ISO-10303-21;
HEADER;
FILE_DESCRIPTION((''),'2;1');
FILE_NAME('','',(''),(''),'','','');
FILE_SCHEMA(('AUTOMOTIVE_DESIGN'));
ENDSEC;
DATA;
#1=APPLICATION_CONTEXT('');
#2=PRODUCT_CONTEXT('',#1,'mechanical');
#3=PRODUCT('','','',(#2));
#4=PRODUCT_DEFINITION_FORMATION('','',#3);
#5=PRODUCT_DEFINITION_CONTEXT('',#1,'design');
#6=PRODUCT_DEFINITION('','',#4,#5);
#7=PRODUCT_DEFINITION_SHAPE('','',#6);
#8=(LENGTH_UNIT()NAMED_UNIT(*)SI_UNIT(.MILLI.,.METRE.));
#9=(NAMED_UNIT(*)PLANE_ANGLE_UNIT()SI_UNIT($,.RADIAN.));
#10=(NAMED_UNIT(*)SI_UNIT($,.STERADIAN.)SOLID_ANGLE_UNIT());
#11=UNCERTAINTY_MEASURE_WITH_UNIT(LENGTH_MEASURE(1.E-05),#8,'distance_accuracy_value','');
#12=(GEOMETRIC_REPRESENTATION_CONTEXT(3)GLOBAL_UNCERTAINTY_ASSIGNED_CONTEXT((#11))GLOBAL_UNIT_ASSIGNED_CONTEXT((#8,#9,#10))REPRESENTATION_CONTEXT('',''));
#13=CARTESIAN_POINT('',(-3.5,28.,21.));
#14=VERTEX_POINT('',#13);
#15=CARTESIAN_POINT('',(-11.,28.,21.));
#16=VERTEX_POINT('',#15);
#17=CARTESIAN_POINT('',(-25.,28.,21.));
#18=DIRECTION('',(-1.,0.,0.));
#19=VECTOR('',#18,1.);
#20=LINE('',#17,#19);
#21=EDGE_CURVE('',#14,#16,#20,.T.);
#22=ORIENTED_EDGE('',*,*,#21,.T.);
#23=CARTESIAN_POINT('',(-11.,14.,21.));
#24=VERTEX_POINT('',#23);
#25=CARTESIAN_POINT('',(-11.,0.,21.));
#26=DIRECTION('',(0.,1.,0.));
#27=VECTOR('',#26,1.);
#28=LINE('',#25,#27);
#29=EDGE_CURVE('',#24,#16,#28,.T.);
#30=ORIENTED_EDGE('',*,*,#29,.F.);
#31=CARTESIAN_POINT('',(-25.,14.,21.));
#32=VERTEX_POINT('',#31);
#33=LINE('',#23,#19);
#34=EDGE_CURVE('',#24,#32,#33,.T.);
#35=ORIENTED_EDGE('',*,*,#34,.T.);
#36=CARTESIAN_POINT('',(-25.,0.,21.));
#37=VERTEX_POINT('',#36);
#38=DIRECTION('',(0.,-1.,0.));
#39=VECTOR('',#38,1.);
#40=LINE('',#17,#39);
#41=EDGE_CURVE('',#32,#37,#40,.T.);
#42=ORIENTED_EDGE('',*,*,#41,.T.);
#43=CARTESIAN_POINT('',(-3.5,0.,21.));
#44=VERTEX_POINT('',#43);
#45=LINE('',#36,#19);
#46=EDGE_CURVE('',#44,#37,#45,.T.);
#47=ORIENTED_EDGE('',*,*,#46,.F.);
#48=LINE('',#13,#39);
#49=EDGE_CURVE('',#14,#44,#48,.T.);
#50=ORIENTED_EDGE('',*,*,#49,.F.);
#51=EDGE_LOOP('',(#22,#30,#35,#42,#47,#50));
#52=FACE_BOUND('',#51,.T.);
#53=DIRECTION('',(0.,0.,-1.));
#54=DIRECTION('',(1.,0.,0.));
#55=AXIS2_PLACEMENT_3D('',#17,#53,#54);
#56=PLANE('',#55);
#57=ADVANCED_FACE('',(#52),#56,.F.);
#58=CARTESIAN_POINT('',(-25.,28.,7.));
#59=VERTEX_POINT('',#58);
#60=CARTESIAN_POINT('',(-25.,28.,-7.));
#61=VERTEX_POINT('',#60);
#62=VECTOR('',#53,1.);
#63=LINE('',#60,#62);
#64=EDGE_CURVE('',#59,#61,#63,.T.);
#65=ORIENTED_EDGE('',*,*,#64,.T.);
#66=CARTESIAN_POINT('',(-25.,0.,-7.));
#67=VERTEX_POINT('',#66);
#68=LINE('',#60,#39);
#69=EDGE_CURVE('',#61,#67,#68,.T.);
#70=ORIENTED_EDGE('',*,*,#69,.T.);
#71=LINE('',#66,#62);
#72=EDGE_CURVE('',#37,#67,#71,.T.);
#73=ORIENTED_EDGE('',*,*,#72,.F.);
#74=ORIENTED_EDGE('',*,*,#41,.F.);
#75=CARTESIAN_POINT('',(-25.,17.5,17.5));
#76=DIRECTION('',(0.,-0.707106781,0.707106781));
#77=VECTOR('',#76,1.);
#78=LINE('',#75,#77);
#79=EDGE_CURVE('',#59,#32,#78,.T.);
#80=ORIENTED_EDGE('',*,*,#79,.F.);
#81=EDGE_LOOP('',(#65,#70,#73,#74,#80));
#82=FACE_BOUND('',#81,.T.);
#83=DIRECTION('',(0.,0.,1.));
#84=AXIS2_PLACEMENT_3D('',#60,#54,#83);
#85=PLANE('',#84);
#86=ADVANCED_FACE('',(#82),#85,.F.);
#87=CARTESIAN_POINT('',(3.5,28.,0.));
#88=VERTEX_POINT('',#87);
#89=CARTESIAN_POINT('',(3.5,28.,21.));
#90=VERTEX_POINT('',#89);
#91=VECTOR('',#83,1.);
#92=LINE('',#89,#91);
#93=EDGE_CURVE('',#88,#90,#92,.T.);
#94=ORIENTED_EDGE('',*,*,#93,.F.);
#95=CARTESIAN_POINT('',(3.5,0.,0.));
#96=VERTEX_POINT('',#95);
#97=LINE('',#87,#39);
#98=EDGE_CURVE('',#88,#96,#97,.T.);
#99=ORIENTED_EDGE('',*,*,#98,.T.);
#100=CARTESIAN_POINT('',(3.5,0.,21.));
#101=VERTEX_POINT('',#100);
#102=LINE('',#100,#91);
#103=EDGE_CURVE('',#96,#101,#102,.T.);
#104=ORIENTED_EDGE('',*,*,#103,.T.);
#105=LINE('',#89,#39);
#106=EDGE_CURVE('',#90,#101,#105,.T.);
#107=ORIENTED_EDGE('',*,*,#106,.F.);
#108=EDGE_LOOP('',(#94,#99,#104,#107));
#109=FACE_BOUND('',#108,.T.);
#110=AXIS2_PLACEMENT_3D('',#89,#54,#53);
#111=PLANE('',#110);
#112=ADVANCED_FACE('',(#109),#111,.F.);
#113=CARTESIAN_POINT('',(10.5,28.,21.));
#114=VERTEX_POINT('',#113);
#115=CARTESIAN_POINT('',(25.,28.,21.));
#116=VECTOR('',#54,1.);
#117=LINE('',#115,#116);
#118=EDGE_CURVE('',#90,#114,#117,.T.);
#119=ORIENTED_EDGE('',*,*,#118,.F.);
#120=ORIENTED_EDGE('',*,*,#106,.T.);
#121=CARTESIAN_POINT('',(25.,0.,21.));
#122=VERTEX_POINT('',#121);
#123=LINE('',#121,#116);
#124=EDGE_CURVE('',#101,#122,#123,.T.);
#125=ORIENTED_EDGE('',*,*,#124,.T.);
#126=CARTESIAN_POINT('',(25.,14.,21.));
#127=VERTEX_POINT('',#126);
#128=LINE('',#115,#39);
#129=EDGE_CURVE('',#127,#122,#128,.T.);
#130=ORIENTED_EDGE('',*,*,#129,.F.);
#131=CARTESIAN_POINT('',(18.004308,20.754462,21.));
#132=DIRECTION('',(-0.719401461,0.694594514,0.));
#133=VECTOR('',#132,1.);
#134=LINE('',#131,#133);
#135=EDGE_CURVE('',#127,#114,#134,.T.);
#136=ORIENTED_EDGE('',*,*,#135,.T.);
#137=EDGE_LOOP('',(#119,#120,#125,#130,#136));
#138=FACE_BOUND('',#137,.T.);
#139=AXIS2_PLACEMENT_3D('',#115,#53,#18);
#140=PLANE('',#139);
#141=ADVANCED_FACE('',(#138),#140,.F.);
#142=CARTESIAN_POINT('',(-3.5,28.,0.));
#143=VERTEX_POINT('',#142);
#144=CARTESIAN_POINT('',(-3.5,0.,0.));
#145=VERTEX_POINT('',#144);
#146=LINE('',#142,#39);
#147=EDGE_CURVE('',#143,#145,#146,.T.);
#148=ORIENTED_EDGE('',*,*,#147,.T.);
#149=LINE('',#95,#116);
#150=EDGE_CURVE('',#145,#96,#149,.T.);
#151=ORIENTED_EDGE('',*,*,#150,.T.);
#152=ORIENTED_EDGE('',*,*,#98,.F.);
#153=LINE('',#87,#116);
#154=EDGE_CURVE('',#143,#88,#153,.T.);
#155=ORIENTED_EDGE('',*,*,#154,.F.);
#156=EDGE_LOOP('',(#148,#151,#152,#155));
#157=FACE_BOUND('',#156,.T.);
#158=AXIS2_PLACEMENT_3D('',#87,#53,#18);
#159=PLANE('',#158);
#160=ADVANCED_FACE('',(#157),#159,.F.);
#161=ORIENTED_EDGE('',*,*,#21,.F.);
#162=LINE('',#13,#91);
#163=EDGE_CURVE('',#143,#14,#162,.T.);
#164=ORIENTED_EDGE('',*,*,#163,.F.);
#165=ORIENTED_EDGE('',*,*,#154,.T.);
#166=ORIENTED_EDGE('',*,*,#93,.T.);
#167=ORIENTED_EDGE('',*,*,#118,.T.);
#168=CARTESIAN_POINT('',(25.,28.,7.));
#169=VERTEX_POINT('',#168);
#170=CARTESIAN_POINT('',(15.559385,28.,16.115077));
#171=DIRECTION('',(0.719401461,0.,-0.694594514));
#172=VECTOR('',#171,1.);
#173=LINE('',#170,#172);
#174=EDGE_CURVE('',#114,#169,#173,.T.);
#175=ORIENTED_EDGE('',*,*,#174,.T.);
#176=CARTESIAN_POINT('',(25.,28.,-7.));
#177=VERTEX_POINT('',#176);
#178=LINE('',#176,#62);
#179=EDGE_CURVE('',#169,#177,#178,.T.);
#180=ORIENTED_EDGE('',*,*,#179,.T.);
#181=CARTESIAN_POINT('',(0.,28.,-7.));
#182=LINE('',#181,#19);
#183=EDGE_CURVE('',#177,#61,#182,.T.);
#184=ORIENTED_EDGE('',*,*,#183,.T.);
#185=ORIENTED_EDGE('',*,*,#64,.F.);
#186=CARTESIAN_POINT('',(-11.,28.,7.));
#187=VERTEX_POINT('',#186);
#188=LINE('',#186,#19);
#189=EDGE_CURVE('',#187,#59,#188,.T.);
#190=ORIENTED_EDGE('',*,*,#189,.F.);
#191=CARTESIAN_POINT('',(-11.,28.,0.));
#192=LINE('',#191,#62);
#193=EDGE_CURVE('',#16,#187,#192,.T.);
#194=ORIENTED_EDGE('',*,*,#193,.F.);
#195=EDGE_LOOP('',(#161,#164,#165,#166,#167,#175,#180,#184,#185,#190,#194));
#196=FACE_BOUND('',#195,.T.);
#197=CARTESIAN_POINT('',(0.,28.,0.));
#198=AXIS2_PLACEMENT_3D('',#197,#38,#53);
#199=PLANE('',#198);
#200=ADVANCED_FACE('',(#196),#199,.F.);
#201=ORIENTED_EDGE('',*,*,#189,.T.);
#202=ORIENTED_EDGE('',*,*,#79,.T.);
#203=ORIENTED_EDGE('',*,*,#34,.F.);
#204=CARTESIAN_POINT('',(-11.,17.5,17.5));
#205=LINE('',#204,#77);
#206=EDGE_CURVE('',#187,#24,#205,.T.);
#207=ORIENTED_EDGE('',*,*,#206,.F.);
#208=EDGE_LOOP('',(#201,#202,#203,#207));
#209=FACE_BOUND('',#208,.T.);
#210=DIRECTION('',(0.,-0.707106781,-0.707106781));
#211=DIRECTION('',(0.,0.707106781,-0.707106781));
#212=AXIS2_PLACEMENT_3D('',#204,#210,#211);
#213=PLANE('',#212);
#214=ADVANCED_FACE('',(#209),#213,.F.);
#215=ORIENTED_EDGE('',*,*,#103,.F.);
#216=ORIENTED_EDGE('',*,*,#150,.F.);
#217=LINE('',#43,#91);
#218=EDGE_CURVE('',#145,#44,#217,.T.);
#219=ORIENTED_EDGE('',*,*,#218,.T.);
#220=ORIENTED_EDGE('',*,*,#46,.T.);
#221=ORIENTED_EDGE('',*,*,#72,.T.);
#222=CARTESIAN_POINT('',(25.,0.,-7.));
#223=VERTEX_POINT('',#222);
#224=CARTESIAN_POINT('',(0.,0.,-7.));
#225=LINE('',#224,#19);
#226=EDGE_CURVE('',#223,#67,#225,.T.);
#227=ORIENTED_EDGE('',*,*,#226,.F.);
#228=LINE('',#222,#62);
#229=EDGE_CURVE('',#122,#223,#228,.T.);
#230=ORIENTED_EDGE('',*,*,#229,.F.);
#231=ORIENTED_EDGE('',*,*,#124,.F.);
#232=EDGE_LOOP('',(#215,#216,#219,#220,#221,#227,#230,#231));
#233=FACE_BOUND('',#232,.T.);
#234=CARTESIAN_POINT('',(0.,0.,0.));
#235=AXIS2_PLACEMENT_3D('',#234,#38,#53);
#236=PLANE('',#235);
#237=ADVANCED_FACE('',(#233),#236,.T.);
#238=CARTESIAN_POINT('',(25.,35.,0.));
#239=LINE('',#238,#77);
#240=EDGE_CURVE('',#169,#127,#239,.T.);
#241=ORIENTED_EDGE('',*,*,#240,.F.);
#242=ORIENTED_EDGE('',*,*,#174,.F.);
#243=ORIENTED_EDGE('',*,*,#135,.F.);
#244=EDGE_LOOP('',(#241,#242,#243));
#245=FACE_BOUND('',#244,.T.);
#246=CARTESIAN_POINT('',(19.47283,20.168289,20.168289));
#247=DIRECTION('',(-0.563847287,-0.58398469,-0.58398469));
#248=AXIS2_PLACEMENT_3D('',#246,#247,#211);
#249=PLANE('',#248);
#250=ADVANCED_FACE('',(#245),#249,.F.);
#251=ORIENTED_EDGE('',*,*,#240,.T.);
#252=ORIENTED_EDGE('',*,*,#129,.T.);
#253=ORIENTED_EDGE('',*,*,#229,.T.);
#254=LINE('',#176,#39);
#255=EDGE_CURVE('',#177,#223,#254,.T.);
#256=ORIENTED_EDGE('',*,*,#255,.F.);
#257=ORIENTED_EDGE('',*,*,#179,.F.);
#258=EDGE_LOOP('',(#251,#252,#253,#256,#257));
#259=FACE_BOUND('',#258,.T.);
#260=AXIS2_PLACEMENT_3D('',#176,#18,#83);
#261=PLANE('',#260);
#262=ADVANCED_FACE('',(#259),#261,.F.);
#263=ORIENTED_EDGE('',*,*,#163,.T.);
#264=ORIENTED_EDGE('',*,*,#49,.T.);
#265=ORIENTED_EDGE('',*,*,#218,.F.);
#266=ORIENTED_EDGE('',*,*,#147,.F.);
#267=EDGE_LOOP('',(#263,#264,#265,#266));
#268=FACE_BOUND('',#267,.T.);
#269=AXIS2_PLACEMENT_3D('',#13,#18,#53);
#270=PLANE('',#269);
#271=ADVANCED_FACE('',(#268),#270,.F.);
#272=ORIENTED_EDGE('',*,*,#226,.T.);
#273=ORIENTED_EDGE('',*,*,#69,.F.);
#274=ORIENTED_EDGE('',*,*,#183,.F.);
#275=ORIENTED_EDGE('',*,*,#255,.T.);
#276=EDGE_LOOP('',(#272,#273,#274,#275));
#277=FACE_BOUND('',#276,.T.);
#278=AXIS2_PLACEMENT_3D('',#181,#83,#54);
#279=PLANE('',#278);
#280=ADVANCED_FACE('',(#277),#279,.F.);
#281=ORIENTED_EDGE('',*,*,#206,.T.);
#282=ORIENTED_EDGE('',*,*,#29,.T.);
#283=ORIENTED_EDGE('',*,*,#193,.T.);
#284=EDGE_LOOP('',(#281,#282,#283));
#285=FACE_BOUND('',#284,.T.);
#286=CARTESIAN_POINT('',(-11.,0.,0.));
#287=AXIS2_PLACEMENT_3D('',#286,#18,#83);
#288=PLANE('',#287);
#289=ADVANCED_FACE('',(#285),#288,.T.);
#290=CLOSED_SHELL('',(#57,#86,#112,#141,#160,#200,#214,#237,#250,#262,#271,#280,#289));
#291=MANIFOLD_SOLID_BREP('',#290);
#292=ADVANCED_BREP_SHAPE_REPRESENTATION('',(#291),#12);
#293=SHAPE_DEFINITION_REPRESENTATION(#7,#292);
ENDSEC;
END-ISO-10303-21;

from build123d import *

# Parameters (mm, degrees)
BOSS_EXTRUDE1_DEPTH = 28
CHAMFER1_START      = 34.535646335
CHAMFER1_OUTLINE_W  = 20
CHAMFER1_OUTLINE_H  = 22
CHAMFER1_DEPTH      = 9.464353665
CUT_EXTRUDE1_DEPTH  = 14


with BuildPart() as part:
    # Sketch1 → Boss-Extrude1 (new body)
    with BuildSketch(Plane(origin=(0, 0, 0), x_dir=(1, 0, 0), z_dir=(0, 1, 0))):
        Polygon((0, 0), (0, 7), (25, 7), (25, -21), (3.5, -21), (3.5, 0), align=None)
    extrude(amount=BOSS_EXTRUDE1_DEPTH)

    # Mirror1: part across plane


with BuildPart() as part_1:
    add(part.part)
    add(part.part.mirror(Plane(origin=(0, 28, 0), x_dir=(0, 0, 1), z_dir=(1, 0, 0))))

    # Chamfer1: read off the stored shape, not the designer's step
    # Chamfer1 outline → Chamfer1 (cut)
    with BuildSketch(Plane(origin=(0, 0, 0), x_dir=(0.8258790691262022, -0.39870024026782175, -0.39870024026782164), z_dir=(0.5638472871081651, 0.5839846902191711, 0.583984690219171)).offset(CHAMFER1_START)):
        with Locations((-2, 5)):
            Rectangle(CHAMFER1_OUTLINE_W, CHAMFER1_OUTLINE_H)
    extrude(amount=CHAMFER1_DEPTH, mode=Mode.SUBTRACT)

    # Sketch2 → Cut-Extrude1 (cut)
    with BuildSketch(Plane.ZY.offset(25)):
        Polygon((21, 28), (7, 28), (21, 14), align=None)
    extrude(amount=-CUT_EXTRUDE1_DEPTH, mode=Mode.SUBTRACT)


solid = part_1.part
